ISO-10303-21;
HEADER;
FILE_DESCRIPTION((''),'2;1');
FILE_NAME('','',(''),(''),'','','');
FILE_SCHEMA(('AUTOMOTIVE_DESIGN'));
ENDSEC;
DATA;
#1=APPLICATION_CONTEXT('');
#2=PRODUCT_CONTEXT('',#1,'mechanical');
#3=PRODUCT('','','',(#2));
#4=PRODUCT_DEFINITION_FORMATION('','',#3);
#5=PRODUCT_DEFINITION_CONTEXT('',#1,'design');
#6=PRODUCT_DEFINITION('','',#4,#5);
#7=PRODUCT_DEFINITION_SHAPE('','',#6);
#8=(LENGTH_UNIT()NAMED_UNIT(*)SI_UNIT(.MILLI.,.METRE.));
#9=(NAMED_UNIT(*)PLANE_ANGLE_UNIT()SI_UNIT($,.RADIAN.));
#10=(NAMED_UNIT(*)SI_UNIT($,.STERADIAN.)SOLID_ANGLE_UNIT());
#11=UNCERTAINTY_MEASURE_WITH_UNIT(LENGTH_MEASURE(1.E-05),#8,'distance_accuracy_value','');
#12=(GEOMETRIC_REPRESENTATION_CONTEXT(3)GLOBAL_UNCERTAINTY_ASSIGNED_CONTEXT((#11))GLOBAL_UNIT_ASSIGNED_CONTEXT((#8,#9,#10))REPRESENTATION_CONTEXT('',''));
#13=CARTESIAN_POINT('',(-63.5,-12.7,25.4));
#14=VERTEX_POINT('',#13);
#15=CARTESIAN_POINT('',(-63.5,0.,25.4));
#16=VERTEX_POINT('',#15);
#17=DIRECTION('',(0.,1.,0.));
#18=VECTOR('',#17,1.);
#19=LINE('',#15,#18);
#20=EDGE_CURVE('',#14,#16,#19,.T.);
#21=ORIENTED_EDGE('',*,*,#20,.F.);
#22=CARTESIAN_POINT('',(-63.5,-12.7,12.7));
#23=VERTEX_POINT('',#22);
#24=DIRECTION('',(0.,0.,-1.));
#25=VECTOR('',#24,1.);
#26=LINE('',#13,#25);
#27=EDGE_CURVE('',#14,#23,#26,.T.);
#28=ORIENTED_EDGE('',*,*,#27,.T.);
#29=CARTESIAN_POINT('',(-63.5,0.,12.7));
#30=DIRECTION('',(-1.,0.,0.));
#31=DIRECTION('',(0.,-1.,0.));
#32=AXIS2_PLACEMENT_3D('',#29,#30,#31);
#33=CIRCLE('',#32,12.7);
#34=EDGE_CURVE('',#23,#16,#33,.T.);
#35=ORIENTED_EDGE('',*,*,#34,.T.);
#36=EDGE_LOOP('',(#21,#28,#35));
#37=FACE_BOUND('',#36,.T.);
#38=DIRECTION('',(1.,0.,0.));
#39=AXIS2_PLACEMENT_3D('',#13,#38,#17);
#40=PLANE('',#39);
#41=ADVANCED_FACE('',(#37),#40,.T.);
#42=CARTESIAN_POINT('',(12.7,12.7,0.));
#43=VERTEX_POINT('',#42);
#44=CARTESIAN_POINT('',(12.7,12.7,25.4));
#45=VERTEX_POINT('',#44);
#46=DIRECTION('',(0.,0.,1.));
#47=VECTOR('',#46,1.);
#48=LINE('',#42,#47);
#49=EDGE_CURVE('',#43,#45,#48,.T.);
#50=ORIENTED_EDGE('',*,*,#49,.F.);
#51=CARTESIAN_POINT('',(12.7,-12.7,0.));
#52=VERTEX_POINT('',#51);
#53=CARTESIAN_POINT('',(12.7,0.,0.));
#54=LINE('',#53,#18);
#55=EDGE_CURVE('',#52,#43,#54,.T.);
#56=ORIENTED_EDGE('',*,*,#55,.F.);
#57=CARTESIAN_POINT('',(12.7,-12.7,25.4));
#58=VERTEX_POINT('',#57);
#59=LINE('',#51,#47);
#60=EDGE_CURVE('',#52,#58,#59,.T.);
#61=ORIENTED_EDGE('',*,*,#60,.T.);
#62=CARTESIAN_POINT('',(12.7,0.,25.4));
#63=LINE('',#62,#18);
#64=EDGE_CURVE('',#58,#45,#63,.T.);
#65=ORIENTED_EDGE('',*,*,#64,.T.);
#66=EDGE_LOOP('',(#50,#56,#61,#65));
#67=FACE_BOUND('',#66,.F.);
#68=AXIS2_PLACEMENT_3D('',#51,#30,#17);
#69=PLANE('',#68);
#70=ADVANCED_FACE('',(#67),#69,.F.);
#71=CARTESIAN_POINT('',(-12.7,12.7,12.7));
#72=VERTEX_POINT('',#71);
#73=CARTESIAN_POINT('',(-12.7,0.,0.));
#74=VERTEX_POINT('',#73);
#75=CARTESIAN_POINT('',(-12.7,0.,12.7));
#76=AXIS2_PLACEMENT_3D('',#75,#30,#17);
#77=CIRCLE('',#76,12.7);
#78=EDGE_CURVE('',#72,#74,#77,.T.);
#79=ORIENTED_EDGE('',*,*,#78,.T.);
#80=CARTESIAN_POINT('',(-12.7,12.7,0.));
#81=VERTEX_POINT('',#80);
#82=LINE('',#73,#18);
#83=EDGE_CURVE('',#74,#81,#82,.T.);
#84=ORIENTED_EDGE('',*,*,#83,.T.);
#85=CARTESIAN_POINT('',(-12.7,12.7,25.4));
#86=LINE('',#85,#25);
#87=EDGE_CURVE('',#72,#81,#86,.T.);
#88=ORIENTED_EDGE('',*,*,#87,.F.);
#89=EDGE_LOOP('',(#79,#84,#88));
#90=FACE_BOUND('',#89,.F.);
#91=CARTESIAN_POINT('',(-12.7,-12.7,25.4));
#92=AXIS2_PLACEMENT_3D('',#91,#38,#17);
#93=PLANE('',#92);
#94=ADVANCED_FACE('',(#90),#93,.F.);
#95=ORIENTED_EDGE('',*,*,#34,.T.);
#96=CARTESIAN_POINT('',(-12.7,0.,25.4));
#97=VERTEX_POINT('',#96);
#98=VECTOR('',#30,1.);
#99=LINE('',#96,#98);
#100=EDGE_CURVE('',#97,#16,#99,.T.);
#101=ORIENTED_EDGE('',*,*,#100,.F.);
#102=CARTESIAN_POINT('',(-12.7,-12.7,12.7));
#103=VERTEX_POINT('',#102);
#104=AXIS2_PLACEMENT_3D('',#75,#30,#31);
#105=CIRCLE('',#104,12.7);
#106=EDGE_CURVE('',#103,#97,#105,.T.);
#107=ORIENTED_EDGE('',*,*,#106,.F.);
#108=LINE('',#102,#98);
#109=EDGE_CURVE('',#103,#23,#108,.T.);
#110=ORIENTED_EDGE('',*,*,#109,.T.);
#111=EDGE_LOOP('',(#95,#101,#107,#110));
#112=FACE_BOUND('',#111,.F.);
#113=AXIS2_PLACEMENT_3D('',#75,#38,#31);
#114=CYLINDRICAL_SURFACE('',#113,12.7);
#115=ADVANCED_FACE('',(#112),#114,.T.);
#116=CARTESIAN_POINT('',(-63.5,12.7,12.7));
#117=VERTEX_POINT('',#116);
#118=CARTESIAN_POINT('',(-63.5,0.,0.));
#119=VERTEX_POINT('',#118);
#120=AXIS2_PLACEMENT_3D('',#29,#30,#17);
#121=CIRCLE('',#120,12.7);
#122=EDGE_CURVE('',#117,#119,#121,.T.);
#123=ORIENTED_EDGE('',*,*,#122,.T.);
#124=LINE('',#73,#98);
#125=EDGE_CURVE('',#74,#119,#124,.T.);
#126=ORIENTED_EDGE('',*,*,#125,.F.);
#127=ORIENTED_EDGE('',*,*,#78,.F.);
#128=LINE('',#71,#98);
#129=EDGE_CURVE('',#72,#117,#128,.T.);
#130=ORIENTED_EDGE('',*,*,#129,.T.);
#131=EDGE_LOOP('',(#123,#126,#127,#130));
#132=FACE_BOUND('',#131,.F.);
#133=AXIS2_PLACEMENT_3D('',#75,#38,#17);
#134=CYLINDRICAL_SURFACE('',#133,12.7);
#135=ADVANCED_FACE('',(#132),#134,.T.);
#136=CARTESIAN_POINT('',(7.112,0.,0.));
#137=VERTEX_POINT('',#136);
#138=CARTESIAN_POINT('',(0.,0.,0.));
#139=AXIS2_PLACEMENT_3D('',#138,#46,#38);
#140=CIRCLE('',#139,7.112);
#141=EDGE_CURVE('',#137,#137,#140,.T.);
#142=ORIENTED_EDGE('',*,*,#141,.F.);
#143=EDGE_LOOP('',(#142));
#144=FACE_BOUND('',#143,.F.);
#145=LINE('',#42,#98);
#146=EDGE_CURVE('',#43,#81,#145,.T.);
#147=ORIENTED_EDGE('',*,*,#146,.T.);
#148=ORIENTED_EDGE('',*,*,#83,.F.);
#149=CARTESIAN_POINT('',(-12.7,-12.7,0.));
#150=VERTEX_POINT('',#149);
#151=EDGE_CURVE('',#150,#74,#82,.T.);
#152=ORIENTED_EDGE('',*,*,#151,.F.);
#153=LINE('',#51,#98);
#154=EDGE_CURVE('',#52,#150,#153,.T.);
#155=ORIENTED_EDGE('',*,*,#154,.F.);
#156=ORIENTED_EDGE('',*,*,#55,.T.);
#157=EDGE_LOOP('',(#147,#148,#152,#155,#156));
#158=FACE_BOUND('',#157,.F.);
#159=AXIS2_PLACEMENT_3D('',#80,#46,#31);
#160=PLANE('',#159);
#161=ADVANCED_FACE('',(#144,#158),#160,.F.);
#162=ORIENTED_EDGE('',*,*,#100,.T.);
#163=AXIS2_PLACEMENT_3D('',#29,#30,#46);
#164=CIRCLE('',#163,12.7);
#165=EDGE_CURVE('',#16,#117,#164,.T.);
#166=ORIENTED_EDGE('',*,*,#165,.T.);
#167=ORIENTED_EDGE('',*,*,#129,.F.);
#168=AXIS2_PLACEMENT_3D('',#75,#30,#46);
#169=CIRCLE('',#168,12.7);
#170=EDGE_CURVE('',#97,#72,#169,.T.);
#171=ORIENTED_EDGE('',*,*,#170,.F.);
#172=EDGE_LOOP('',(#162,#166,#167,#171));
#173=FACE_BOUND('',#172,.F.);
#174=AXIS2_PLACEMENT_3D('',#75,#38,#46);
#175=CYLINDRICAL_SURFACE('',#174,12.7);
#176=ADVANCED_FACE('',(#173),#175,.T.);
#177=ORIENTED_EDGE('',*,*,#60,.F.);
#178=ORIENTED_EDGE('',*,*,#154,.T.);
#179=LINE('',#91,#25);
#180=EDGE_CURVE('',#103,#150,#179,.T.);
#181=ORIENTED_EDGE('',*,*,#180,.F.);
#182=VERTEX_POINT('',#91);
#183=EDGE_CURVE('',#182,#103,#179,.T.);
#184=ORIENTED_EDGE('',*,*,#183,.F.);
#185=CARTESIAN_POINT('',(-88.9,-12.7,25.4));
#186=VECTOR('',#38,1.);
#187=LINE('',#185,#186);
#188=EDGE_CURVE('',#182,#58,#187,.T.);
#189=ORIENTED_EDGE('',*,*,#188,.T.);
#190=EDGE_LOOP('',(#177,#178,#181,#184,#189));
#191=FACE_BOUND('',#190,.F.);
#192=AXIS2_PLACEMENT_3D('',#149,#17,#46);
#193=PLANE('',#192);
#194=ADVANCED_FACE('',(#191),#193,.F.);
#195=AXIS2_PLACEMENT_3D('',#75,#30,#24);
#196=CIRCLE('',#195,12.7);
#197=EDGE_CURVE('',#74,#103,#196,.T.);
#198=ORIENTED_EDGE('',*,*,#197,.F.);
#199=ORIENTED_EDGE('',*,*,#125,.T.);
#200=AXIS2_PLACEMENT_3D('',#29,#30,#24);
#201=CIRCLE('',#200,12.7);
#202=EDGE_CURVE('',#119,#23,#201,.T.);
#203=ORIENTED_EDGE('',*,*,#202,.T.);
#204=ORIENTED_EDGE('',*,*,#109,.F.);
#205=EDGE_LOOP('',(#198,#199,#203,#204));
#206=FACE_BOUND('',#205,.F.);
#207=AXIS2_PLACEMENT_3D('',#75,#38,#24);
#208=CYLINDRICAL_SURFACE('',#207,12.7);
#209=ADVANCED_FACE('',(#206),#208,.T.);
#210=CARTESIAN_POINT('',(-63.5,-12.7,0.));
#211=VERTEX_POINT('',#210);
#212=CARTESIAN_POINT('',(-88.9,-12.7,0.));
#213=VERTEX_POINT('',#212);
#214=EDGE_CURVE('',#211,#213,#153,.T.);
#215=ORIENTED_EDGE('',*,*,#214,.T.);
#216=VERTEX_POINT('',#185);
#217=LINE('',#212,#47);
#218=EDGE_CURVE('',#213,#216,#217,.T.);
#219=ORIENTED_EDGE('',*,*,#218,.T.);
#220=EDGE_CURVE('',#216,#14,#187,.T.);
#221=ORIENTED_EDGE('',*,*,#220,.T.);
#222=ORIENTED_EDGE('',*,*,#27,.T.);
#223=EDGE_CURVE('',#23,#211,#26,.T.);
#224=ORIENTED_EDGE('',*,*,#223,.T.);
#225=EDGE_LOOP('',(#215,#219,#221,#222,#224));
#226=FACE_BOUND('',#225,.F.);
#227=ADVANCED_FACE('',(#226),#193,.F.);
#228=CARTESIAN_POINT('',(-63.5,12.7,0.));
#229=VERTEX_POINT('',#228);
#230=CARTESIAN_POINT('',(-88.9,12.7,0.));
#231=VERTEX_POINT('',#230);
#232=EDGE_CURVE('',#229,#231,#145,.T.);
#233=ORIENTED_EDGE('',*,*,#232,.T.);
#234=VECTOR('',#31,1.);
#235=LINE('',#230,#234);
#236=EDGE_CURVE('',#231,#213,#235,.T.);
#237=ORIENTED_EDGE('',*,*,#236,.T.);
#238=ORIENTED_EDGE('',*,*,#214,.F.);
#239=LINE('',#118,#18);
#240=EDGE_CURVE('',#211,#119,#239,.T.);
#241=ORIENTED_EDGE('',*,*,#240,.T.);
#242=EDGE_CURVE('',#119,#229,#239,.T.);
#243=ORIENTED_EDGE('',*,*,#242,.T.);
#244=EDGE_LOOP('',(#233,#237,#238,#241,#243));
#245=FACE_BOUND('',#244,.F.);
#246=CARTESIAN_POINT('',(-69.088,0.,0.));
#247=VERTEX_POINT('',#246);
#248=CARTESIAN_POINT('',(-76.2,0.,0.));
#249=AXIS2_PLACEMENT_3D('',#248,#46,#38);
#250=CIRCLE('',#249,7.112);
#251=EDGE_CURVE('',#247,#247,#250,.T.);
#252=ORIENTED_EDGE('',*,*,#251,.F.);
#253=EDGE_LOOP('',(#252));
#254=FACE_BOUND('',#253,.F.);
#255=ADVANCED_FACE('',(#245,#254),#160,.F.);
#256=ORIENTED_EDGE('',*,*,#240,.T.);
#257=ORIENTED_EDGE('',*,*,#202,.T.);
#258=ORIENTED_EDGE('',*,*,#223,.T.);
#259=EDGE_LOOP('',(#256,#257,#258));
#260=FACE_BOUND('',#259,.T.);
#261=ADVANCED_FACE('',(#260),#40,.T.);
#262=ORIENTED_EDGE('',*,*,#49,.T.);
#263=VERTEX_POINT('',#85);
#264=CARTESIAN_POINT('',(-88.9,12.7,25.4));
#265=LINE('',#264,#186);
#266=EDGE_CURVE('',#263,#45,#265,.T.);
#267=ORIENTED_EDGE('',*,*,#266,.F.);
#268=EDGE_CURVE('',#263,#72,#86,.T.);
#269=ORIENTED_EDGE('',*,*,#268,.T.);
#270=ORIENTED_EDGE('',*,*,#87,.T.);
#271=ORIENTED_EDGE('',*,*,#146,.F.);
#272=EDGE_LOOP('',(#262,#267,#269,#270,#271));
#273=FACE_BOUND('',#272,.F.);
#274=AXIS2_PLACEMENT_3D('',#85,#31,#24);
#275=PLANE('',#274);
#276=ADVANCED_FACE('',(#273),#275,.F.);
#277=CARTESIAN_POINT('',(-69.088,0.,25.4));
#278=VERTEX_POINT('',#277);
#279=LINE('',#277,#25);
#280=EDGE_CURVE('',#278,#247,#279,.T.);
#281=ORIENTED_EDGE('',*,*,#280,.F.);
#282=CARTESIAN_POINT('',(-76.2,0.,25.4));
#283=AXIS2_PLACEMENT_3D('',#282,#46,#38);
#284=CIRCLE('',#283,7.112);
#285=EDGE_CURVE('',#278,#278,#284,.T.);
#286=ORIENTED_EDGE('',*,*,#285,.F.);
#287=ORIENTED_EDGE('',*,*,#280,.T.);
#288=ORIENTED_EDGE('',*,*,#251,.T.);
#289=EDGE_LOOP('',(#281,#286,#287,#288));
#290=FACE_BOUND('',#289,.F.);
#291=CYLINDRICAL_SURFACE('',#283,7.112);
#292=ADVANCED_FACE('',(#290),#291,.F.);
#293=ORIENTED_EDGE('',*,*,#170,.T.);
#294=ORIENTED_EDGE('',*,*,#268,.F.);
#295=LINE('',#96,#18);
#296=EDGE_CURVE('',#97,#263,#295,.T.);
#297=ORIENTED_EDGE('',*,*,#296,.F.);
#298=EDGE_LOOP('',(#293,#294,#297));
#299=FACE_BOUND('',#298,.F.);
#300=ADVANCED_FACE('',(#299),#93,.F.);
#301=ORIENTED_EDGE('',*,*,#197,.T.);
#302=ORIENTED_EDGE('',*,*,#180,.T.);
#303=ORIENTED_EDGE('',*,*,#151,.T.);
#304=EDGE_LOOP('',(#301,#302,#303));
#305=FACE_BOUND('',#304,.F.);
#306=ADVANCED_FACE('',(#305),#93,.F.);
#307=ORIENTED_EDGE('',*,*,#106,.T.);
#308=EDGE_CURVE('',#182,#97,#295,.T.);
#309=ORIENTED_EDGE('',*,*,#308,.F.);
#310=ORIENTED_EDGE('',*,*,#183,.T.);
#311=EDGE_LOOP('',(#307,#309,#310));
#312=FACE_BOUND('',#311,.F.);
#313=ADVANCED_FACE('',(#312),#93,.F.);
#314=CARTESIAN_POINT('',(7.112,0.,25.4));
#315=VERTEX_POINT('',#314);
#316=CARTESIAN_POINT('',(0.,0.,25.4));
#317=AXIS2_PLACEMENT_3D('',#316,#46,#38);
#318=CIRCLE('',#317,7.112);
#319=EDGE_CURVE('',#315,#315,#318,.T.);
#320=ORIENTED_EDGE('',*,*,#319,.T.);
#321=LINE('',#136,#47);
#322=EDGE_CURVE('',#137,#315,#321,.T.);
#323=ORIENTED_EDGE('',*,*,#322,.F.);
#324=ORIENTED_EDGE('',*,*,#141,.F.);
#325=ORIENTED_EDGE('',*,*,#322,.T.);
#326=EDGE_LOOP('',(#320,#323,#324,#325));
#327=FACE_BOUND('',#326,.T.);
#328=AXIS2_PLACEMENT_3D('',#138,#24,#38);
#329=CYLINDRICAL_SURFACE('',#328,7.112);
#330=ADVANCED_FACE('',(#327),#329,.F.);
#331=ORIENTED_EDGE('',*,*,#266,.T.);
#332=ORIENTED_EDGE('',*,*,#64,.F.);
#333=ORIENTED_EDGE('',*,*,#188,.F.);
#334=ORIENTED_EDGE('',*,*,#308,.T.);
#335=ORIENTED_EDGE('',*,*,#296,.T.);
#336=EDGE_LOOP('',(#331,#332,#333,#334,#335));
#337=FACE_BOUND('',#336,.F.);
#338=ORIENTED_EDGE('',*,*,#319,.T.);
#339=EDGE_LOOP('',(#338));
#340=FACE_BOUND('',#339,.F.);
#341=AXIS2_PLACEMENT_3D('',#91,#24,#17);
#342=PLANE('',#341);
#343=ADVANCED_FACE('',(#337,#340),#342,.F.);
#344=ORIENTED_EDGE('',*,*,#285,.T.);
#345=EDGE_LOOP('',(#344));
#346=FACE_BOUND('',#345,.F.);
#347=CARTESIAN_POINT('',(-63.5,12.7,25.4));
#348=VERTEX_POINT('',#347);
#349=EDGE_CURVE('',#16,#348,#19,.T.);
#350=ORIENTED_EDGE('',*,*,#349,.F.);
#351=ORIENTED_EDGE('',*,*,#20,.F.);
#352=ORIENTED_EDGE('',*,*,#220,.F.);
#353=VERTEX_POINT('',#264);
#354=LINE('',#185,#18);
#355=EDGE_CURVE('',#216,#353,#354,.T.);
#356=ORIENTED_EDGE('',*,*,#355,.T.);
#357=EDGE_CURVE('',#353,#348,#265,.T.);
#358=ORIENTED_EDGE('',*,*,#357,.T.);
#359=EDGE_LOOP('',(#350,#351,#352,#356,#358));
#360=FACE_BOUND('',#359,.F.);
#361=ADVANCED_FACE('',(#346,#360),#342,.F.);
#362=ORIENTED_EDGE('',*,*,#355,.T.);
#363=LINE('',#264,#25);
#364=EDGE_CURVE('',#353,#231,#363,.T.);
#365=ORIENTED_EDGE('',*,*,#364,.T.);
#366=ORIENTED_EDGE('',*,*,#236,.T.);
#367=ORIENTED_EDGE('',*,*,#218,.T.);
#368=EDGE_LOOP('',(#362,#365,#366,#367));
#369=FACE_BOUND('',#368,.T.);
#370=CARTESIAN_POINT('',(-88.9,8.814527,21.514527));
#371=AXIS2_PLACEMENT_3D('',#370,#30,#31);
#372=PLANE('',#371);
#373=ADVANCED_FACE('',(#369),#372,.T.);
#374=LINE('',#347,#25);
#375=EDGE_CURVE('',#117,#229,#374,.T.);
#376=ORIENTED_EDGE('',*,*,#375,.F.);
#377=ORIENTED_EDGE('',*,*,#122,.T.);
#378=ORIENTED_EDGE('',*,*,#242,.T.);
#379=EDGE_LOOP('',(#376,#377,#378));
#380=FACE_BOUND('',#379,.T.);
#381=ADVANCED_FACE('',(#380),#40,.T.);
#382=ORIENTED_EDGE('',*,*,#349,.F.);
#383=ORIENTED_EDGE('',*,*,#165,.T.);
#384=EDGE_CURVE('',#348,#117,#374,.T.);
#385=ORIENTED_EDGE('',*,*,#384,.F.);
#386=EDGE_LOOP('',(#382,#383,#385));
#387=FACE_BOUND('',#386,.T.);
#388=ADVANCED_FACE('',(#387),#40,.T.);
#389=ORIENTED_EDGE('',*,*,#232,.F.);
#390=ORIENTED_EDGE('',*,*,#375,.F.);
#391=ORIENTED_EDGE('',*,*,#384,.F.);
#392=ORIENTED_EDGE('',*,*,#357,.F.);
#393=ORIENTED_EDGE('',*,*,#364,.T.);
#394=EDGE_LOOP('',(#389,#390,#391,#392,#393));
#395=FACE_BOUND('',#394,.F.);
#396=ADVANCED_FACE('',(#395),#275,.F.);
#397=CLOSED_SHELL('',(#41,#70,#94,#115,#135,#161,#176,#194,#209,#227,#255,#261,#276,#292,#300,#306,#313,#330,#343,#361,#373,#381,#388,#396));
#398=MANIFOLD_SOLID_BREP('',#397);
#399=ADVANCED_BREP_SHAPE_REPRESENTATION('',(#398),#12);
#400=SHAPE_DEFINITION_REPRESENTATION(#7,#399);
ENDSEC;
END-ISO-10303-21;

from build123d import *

# Parameters (mm, degrees)
F0_W     = 25.4
F0_H     = 25.4
F0_R     = 7.112
F1_DEPTH = 25.4
F3_DEPTH = 76.2
F4_R     = 7.112
F4_W     = 50.8
F4_H     = 25.4
F5_DEPTH = 25.401
F6_DEPTH = 50.8
F7_R     = 7.112
F8_DEPTH = 148


# Not quite as in the source:
# - an extrude ends at something that could not be found from the text; its depth is read off the source's solid


with BuildPart() as f1:
    # F0 (on Top) → F1 (new body)
    with BuildSketch(Plane.XY):
        Rectangle(F0_W, F0_H)
        Circle(F0_R, mode=Mode.SUBTRACT)
    extrude(amount=F1_DEPTH)

    # F2 (on face) → F3 (join)
    with BuildSketch(Plane(origin=(-12.7, 0, 0), x_dir=(0, -1, 0), z_dir=(-1, 0, 0))):
        with BuildLine():
            ThreePointArc((-12.7, 12.7), (-8.9802561211, 21.6802561211), (0, 25.4))
            Line((0, 25.4), (-12.7, 25.4))
            Line((-12.7, 25.4), (-12.7, 12.7))
        make_face()
        with BuildLine():
            ThreePointArc((0, 25.4), (8.9802561211, 21.6802561211), (12.7, 12.7))
            Line((12.7, 12.7), (12.7, 25.4))
            Line((12.7, 25.4), (0, 25.4))
        make_face()
        with BuildLine():
            Line((12.7, 0), (12.7, 12.7))
            ThreePointArc((12.7, 12.7), (8.9802561211, 3.7197438789), (0, 0))
            Line((0, 0), (12.7, 0))
        make_face()
        with BuildLine():
            Line((-12.7, 0), (0, 0))
            ThreePointArc((0, 0), (-8.9802561211, 3.7197438789), (-12.7, 12.7))
            Line((-12.7, 12.7), (-12.7, 0))
        make_face()
        with BuildLine():
            ThreePointArc((0, 0), (8.9802561211, 3.7197438789), (12.7, 12.7))
            ThreePointArc((12.7, 12.7), (8.9802561211, 21.6802561211), (0, 25.4))
            ThreePointArc((0, 25.4), (-8.9802561211, 21.6802561211), (-12.7, 12.7))
            ThreePointArc((-12.7, 12.7), (-8.9802561211, 3.7197438789), (0, 0))
        make_face()
    extrude(amount=F3_DEPTH)

    # F4 (on face) → F5 (cut, through all)
    with BuildSketch(Plane.XY.offset(25.4)):
        with Locations((-76.2, 0)):
            Circle(F4_R)
        with Locations((-38.1, 0)):
            Rectangle(F4_W, F4_H)
    extrude(amount=-F5_DEPTH, mode=Mode.SUBTRACT)

    # F2 (on face) → F6 (join, through all)
    with BuildSketch(Plane(origin=(-12.7, 0, 0), x_dir=(0, -1, 0), z_dir=(-1, 0, 0))):
        with BuildLine():
            ThreePointArc((0, 0), (8.9802561211, 3.7197438789), (12.7, 12.7))
            ThreePointArc((12.7, 12.7), (8.9802561211, 21.6802561211), (0, 25.4))
            ThreePointArc((0, 25.4), (-8.9802561211, 21.6802561211), (-12.7, 12.7))
            ThreePointArc((-12.7, 12.7), (-8.9802561211, 3.7197438789), (0, 0))
        make_face()
    extrude(amount=F6_DEPTH)

    # F7 (on face) → F8 (cut, through all)
    with BuildSketch(Plane(origin=(0, 0, 0), x_dir=(1, 0, 0), z_dir=(0, 0, -1))):
        Polygon((-63.5, 0), (-63.5, 12.7), (-88.9, 12.7), (-88.9, -12.7), (-63.5, -12.7), align=None)
        with Locations((-76.2, 0)):
            Circle(F7_R, mode=Mode.SUBTRACT)
    extrude(amount=F8_DEPTH, mode=Mode.SUBTRACT)


solid = f1.part
